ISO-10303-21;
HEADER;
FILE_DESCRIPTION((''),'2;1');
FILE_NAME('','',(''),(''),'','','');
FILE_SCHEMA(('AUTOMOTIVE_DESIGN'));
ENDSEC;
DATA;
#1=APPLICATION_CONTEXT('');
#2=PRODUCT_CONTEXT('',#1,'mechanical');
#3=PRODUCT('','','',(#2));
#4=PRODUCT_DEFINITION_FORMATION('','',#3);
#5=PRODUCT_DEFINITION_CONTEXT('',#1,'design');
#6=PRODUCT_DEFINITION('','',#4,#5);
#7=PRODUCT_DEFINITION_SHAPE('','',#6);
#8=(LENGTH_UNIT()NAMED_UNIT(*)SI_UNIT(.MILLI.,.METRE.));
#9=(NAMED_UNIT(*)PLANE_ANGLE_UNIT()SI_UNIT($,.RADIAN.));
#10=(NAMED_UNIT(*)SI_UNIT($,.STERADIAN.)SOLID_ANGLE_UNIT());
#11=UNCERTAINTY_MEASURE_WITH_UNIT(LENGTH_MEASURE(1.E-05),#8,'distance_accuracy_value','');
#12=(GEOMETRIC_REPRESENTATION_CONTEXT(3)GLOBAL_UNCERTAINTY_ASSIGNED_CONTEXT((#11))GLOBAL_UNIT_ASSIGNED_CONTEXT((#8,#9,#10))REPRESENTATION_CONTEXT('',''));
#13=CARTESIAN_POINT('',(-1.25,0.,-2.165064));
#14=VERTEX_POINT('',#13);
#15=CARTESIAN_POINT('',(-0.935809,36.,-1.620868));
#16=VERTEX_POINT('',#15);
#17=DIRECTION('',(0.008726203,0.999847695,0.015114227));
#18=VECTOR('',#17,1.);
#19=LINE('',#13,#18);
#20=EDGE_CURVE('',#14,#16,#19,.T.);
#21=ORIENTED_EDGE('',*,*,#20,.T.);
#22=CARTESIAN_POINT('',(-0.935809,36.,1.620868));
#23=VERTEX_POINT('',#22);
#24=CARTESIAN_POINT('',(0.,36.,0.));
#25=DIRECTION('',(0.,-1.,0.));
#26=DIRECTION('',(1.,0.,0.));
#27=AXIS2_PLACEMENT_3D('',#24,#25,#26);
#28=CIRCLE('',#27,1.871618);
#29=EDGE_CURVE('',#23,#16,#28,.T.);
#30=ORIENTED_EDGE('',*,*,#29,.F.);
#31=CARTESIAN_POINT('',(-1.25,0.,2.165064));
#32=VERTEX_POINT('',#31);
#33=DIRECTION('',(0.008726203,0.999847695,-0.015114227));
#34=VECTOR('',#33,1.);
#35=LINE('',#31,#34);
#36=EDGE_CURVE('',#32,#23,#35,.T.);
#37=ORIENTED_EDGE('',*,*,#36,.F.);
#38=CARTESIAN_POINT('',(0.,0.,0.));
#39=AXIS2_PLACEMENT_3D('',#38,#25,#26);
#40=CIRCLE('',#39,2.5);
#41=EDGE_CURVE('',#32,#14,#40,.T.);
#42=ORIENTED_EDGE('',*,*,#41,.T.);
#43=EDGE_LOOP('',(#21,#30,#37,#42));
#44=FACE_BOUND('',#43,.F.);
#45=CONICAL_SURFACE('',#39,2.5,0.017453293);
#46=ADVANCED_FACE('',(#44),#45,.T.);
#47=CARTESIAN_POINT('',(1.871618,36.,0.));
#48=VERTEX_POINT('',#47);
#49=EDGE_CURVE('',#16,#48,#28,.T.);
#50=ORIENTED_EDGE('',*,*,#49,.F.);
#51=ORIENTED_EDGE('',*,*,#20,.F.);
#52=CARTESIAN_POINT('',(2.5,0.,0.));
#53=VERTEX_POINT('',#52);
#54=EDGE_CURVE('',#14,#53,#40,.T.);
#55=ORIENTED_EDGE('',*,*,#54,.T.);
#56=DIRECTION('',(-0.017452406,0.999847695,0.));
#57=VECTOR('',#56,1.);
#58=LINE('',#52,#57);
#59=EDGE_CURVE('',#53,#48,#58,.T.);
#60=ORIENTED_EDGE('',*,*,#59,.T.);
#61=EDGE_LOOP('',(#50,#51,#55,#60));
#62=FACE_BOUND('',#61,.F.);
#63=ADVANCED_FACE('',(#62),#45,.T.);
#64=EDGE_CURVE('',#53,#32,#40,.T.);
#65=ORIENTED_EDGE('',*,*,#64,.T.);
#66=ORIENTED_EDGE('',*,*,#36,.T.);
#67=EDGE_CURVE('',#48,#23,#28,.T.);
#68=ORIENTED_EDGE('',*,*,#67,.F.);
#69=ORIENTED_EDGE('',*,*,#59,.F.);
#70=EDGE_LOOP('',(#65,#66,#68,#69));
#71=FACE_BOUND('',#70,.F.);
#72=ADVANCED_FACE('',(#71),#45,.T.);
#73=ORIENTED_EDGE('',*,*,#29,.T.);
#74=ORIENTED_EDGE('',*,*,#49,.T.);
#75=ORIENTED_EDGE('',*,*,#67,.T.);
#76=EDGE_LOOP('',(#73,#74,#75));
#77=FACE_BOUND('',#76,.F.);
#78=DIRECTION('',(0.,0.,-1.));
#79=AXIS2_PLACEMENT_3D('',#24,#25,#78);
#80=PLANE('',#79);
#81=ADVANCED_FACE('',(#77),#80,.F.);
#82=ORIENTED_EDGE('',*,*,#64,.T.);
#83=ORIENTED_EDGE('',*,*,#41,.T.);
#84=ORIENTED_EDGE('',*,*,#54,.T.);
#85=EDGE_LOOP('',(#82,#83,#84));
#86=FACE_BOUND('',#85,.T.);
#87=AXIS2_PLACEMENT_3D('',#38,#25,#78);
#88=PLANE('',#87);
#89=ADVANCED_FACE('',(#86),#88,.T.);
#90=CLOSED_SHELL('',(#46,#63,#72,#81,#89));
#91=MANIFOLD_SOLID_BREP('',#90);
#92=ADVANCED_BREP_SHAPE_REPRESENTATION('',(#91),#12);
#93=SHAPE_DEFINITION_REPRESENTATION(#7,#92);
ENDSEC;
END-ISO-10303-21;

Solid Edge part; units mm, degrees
sketch "Sketch1" plane through (0, 0, 0) normal (0, -1, 0) x (1, 0, 0)
  circle A0 centre (0, 0) radius 2.5
  dimension "D1" = 5
extrude "ExtrudedProtrusion_1" add sketch "Sketch1" against normal blind 36 draft 1
properties part number "5"
